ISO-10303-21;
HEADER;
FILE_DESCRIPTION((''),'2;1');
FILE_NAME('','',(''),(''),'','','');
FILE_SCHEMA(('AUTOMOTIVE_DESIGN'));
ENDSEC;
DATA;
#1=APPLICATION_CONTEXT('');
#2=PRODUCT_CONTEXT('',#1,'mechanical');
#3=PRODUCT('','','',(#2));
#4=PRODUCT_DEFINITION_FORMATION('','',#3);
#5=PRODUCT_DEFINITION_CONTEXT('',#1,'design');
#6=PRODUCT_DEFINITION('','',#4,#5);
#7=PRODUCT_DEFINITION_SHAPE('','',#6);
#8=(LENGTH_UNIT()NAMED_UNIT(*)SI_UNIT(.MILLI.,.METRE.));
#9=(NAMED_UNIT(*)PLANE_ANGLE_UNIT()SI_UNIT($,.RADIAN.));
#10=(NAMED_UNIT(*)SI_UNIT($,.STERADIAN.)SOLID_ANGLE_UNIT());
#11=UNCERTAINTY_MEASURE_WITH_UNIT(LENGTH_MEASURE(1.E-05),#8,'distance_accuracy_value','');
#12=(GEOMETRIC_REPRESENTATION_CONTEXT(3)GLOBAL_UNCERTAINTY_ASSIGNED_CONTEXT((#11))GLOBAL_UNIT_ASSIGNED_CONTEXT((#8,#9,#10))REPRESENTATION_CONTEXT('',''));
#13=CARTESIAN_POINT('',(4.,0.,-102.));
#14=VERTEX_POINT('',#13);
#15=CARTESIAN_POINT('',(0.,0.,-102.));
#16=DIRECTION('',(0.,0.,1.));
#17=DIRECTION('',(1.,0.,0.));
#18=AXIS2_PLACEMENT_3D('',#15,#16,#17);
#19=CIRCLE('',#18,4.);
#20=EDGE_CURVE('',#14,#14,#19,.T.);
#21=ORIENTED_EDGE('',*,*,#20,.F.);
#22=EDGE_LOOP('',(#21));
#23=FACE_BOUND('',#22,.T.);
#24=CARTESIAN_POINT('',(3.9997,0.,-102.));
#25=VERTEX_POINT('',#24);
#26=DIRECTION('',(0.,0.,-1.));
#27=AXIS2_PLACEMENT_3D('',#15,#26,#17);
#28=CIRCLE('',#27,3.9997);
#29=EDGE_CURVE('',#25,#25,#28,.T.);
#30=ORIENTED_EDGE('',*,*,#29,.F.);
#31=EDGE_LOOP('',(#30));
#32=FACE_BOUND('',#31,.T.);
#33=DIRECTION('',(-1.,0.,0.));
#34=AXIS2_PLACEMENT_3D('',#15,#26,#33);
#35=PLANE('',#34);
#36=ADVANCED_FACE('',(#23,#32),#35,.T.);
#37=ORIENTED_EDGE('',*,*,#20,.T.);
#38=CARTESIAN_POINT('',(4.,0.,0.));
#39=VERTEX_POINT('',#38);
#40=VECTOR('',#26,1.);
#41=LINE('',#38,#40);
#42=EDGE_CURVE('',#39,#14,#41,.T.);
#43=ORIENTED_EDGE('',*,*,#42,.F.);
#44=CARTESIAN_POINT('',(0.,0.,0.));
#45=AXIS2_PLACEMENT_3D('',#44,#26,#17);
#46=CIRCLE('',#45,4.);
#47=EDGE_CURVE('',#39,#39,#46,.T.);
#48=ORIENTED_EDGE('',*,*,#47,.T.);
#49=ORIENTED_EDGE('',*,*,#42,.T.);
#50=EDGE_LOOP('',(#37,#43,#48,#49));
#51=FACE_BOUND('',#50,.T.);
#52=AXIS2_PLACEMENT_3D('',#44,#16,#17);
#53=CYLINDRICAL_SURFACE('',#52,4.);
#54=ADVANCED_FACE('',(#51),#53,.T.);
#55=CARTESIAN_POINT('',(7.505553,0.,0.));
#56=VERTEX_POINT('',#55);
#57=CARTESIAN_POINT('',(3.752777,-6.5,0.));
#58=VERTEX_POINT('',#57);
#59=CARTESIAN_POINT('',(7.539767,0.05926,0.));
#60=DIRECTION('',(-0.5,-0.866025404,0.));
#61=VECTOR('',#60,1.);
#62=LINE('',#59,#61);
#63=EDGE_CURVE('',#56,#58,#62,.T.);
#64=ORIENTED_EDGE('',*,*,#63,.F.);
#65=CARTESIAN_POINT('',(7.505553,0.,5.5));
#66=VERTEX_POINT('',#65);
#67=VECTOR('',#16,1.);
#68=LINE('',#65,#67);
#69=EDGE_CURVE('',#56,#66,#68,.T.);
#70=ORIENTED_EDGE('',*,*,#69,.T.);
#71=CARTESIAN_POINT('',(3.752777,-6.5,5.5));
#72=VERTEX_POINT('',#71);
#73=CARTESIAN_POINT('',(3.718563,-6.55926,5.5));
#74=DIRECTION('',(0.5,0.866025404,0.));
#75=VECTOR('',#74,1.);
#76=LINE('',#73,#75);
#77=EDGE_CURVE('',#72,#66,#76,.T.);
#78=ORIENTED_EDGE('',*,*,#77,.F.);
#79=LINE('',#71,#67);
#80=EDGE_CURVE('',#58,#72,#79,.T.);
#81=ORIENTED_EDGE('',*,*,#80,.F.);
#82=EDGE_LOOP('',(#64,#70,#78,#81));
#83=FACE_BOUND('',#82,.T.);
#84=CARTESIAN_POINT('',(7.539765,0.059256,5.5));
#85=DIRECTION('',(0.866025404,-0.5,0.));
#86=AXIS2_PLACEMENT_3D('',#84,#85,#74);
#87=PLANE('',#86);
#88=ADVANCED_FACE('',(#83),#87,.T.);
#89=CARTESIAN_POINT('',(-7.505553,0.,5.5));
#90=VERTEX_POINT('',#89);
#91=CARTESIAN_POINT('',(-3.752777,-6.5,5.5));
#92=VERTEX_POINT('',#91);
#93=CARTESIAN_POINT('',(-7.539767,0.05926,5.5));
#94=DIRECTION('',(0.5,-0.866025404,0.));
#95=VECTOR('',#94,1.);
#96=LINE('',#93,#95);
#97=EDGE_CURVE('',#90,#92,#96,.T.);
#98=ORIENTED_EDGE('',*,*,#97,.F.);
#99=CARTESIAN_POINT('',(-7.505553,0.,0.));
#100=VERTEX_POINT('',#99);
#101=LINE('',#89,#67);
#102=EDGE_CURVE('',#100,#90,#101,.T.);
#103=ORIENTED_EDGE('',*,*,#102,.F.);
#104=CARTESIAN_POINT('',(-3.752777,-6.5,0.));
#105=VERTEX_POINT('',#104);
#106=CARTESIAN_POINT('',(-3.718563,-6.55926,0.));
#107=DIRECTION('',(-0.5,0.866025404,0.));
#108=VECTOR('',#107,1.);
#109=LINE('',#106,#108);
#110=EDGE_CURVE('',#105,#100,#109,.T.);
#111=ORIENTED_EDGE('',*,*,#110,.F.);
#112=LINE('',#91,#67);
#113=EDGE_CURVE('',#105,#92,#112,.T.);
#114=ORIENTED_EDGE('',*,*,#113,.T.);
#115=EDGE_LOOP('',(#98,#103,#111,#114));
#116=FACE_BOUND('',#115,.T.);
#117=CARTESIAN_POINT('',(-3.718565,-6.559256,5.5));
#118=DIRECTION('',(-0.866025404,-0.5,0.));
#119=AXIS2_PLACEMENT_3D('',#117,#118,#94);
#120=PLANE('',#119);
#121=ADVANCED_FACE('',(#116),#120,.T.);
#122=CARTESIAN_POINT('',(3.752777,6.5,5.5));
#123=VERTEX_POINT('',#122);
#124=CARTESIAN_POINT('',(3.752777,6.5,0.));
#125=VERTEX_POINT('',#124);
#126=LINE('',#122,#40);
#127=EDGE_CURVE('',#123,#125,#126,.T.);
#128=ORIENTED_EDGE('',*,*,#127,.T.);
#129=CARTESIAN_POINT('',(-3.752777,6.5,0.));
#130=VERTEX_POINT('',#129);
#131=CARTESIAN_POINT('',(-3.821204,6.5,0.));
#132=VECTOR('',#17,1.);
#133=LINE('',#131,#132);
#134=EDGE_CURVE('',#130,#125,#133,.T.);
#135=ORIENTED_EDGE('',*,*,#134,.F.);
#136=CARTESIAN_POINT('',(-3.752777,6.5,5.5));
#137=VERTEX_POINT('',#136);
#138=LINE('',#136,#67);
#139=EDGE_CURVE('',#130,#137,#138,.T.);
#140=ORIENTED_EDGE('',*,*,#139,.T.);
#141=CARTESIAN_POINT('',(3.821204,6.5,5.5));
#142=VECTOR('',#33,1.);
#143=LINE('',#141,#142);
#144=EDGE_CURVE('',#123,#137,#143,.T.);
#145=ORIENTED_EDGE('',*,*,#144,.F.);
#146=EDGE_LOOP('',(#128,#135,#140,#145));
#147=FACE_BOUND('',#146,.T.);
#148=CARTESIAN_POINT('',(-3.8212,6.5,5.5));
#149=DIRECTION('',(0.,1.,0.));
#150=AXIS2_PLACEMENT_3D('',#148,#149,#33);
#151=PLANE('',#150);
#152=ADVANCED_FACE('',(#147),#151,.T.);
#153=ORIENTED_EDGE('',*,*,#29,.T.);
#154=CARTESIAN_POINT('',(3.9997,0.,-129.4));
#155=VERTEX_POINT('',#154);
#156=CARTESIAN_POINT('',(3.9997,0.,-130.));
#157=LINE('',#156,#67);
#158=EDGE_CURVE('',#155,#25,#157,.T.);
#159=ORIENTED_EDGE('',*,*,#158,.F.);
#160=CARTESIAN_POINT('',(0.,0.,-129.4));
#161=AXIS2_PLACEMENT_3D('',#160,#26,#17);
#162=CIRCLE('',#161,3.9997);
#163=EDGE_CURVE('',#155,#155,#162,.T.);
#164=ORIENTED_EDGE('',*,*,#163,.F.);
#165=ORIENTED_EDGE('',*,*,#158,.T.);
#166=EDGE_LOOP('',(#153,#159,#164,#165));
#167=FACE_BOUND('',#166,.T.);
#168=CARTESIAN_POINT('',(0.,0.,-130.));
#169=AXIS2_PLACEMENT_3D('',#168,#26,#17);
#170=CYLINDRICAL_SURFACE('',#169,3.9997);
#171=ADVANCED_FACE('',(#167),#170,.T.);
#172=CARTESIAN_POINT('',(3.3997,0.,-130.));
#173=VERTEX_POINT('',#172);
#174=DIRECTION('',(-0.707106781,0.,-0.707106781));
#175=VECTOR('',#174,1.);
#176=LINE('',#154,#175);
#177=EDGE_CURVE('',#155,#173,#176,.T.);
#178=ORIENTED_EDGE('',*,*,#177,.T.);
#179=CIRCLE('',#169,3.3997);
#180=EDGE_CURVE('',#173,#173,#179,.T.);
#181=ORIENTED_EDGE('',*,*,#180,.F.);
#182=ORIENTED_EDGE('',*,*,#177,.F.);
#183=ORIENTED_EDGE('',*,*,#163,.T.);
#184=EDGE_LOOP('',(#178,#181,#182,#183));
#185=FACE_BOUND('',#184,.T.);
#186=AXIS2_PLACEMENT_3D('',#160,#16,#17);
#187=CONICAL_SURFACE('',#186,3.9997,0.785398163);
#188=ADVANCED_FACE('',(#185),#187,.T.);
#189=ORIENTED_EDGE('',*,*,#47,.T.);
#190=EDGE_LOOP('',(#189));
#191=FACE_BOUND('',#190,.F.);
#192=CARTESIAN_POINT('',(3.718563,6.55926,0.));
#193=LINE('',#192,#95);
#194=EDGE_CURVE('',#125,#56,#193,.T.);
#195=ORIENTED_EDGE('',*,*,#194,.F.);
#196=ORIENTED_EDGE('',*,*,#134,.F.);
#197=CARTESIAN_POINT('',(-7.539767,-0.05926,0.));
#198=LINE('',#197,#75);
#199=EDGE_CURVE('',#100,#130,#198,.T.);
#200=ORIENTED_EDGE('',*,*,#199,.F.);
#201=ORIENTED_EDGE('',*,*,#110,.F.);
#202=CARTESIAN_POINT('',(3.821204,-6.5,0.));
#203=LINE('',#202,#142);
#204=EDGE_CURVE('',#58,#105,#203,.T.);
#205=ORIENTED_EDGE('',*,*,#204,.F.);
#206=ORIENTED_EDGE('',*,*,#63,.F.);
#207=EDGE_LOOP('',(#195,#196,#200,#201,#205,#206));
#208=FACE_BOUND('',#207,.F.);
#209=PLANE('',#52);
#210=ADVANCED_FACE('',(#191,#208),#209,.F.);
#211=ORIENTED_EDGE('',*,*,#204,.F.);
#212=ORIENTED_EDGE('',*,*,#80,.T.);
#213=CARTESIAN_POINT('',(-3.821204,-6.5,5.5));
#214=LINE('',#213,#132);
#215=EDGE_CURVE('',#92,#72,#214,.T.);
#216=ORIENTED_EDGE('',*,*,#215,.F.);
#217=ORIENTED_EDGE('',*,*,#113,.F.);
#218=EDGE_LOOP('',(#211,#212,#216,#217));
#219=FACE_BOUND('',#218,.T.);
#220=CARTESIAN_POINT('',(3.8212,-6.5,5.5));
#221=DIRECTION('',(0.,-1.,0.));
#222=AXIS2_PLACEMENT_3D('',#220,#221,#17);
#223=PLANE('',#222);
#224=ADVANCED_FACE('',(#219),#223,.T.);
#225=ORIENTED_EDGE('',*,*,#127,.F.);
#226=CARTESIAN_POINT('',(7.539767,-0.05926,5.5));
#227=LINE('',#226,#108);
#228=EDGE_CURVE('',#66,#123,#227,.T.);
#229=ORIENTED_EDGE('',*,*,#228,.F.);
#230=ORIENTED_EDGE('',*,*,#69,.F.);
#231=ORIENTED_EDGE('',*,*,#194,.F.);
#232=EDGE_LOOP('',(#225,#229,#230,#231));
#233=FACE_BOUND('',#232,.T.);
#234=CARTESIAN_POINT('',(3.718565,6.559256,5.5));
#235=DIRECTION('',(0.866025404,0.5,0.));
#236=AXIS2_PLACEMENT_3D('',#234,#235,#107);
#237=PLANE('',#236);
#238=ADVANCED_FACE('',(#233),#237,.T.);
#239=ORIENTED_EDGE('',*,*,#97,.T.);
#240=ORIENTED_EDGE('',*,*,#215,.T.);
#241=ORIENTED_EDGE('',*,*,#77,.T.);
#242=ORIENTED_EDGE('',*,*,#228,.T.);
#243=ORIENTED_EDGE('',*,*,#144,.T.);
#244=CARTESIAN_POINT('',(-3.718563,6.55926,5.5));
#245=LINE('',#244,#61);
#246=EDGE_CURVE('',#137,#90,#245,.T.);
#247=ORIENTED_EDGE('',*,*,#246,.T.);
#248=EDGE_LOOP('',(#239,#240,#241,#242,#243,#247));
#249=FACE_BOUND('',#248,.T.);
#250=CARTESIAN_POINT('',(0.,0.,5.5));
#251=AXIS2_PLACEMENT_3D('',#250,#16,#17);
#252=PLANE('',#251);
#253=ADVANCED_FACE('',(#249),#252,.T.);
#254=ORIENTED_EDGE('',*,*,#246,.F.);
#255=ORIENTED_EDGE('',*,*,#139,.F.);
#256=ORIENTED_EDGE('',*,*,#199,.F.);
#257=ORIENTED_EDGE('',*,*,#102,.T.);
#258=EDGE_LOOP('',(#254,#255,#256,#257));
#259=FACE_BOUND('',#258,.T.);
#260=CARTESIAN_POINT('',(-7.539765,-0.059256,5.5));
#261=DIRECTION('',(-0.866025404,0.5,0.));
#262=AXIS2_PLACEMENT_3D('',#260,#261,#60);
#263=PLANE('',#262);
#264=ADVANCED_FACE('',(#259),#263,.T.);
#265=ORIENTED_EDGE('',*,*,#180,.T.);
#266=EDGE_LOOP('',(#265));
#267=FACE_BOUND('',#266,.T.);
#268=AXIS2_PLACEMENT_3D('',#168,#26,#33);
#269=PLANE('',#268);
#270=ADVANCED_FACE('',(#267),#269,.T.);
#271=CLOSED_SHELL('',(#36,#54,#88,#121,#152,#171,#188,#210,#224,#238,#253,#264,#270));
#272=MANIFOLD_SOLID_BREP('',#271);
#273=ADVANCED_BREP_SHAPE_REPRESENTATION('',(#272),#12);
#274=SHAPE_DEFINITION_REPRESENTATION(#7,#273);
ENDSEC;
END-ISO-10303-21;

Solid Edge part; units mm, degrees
sketch "Sketch1" plane through (0, 0, 0) normal (0, 0, 1) x (1, 0, 0)
  circle A0 centre (0, 0) radius 7.54
extrude "Protrusion1" add sketch "Sketch1" along normal blind 5.5
sketch "Sketch2" plane through (0, 0, 0) normal (0, 0, -1) x (1, 0, 0)
  circle A0 centre (0, 0) radius 4
extrude "Protrusion2" add sketch "Sketch2" along normal blind 130
sketch "Sketch3" plane through (0, 0, -130) normal (0, 0, -1) x (1, 0, 0)
  circle A0 centre (0, 0) radius 3.9997
extrude "Cutout1" cut sketch "Sketch3" against normal blind 28 flip side to cut
chamfer "Chamfer_1" distance 0.6 angle 45 1 edges at (-3.9997, 0, -130)
sketch "Sketch4" plane through (0, 0, 5.5) normal (0, 0, 1) x (1, 0, 0)
  line L0 (-3.8212, 6.5) -> (3.8212, 6.5)
extrude "Cutout2" cut sketch "Sketch4" against normal up to next material side at (0, 6.55, 5.5)
pattern_circular "Pattern1" count 6 over 360 about axis through (0, 0, 5.5) along (0, 0, 1) of "Cutout2"
properties part number "24104743"
